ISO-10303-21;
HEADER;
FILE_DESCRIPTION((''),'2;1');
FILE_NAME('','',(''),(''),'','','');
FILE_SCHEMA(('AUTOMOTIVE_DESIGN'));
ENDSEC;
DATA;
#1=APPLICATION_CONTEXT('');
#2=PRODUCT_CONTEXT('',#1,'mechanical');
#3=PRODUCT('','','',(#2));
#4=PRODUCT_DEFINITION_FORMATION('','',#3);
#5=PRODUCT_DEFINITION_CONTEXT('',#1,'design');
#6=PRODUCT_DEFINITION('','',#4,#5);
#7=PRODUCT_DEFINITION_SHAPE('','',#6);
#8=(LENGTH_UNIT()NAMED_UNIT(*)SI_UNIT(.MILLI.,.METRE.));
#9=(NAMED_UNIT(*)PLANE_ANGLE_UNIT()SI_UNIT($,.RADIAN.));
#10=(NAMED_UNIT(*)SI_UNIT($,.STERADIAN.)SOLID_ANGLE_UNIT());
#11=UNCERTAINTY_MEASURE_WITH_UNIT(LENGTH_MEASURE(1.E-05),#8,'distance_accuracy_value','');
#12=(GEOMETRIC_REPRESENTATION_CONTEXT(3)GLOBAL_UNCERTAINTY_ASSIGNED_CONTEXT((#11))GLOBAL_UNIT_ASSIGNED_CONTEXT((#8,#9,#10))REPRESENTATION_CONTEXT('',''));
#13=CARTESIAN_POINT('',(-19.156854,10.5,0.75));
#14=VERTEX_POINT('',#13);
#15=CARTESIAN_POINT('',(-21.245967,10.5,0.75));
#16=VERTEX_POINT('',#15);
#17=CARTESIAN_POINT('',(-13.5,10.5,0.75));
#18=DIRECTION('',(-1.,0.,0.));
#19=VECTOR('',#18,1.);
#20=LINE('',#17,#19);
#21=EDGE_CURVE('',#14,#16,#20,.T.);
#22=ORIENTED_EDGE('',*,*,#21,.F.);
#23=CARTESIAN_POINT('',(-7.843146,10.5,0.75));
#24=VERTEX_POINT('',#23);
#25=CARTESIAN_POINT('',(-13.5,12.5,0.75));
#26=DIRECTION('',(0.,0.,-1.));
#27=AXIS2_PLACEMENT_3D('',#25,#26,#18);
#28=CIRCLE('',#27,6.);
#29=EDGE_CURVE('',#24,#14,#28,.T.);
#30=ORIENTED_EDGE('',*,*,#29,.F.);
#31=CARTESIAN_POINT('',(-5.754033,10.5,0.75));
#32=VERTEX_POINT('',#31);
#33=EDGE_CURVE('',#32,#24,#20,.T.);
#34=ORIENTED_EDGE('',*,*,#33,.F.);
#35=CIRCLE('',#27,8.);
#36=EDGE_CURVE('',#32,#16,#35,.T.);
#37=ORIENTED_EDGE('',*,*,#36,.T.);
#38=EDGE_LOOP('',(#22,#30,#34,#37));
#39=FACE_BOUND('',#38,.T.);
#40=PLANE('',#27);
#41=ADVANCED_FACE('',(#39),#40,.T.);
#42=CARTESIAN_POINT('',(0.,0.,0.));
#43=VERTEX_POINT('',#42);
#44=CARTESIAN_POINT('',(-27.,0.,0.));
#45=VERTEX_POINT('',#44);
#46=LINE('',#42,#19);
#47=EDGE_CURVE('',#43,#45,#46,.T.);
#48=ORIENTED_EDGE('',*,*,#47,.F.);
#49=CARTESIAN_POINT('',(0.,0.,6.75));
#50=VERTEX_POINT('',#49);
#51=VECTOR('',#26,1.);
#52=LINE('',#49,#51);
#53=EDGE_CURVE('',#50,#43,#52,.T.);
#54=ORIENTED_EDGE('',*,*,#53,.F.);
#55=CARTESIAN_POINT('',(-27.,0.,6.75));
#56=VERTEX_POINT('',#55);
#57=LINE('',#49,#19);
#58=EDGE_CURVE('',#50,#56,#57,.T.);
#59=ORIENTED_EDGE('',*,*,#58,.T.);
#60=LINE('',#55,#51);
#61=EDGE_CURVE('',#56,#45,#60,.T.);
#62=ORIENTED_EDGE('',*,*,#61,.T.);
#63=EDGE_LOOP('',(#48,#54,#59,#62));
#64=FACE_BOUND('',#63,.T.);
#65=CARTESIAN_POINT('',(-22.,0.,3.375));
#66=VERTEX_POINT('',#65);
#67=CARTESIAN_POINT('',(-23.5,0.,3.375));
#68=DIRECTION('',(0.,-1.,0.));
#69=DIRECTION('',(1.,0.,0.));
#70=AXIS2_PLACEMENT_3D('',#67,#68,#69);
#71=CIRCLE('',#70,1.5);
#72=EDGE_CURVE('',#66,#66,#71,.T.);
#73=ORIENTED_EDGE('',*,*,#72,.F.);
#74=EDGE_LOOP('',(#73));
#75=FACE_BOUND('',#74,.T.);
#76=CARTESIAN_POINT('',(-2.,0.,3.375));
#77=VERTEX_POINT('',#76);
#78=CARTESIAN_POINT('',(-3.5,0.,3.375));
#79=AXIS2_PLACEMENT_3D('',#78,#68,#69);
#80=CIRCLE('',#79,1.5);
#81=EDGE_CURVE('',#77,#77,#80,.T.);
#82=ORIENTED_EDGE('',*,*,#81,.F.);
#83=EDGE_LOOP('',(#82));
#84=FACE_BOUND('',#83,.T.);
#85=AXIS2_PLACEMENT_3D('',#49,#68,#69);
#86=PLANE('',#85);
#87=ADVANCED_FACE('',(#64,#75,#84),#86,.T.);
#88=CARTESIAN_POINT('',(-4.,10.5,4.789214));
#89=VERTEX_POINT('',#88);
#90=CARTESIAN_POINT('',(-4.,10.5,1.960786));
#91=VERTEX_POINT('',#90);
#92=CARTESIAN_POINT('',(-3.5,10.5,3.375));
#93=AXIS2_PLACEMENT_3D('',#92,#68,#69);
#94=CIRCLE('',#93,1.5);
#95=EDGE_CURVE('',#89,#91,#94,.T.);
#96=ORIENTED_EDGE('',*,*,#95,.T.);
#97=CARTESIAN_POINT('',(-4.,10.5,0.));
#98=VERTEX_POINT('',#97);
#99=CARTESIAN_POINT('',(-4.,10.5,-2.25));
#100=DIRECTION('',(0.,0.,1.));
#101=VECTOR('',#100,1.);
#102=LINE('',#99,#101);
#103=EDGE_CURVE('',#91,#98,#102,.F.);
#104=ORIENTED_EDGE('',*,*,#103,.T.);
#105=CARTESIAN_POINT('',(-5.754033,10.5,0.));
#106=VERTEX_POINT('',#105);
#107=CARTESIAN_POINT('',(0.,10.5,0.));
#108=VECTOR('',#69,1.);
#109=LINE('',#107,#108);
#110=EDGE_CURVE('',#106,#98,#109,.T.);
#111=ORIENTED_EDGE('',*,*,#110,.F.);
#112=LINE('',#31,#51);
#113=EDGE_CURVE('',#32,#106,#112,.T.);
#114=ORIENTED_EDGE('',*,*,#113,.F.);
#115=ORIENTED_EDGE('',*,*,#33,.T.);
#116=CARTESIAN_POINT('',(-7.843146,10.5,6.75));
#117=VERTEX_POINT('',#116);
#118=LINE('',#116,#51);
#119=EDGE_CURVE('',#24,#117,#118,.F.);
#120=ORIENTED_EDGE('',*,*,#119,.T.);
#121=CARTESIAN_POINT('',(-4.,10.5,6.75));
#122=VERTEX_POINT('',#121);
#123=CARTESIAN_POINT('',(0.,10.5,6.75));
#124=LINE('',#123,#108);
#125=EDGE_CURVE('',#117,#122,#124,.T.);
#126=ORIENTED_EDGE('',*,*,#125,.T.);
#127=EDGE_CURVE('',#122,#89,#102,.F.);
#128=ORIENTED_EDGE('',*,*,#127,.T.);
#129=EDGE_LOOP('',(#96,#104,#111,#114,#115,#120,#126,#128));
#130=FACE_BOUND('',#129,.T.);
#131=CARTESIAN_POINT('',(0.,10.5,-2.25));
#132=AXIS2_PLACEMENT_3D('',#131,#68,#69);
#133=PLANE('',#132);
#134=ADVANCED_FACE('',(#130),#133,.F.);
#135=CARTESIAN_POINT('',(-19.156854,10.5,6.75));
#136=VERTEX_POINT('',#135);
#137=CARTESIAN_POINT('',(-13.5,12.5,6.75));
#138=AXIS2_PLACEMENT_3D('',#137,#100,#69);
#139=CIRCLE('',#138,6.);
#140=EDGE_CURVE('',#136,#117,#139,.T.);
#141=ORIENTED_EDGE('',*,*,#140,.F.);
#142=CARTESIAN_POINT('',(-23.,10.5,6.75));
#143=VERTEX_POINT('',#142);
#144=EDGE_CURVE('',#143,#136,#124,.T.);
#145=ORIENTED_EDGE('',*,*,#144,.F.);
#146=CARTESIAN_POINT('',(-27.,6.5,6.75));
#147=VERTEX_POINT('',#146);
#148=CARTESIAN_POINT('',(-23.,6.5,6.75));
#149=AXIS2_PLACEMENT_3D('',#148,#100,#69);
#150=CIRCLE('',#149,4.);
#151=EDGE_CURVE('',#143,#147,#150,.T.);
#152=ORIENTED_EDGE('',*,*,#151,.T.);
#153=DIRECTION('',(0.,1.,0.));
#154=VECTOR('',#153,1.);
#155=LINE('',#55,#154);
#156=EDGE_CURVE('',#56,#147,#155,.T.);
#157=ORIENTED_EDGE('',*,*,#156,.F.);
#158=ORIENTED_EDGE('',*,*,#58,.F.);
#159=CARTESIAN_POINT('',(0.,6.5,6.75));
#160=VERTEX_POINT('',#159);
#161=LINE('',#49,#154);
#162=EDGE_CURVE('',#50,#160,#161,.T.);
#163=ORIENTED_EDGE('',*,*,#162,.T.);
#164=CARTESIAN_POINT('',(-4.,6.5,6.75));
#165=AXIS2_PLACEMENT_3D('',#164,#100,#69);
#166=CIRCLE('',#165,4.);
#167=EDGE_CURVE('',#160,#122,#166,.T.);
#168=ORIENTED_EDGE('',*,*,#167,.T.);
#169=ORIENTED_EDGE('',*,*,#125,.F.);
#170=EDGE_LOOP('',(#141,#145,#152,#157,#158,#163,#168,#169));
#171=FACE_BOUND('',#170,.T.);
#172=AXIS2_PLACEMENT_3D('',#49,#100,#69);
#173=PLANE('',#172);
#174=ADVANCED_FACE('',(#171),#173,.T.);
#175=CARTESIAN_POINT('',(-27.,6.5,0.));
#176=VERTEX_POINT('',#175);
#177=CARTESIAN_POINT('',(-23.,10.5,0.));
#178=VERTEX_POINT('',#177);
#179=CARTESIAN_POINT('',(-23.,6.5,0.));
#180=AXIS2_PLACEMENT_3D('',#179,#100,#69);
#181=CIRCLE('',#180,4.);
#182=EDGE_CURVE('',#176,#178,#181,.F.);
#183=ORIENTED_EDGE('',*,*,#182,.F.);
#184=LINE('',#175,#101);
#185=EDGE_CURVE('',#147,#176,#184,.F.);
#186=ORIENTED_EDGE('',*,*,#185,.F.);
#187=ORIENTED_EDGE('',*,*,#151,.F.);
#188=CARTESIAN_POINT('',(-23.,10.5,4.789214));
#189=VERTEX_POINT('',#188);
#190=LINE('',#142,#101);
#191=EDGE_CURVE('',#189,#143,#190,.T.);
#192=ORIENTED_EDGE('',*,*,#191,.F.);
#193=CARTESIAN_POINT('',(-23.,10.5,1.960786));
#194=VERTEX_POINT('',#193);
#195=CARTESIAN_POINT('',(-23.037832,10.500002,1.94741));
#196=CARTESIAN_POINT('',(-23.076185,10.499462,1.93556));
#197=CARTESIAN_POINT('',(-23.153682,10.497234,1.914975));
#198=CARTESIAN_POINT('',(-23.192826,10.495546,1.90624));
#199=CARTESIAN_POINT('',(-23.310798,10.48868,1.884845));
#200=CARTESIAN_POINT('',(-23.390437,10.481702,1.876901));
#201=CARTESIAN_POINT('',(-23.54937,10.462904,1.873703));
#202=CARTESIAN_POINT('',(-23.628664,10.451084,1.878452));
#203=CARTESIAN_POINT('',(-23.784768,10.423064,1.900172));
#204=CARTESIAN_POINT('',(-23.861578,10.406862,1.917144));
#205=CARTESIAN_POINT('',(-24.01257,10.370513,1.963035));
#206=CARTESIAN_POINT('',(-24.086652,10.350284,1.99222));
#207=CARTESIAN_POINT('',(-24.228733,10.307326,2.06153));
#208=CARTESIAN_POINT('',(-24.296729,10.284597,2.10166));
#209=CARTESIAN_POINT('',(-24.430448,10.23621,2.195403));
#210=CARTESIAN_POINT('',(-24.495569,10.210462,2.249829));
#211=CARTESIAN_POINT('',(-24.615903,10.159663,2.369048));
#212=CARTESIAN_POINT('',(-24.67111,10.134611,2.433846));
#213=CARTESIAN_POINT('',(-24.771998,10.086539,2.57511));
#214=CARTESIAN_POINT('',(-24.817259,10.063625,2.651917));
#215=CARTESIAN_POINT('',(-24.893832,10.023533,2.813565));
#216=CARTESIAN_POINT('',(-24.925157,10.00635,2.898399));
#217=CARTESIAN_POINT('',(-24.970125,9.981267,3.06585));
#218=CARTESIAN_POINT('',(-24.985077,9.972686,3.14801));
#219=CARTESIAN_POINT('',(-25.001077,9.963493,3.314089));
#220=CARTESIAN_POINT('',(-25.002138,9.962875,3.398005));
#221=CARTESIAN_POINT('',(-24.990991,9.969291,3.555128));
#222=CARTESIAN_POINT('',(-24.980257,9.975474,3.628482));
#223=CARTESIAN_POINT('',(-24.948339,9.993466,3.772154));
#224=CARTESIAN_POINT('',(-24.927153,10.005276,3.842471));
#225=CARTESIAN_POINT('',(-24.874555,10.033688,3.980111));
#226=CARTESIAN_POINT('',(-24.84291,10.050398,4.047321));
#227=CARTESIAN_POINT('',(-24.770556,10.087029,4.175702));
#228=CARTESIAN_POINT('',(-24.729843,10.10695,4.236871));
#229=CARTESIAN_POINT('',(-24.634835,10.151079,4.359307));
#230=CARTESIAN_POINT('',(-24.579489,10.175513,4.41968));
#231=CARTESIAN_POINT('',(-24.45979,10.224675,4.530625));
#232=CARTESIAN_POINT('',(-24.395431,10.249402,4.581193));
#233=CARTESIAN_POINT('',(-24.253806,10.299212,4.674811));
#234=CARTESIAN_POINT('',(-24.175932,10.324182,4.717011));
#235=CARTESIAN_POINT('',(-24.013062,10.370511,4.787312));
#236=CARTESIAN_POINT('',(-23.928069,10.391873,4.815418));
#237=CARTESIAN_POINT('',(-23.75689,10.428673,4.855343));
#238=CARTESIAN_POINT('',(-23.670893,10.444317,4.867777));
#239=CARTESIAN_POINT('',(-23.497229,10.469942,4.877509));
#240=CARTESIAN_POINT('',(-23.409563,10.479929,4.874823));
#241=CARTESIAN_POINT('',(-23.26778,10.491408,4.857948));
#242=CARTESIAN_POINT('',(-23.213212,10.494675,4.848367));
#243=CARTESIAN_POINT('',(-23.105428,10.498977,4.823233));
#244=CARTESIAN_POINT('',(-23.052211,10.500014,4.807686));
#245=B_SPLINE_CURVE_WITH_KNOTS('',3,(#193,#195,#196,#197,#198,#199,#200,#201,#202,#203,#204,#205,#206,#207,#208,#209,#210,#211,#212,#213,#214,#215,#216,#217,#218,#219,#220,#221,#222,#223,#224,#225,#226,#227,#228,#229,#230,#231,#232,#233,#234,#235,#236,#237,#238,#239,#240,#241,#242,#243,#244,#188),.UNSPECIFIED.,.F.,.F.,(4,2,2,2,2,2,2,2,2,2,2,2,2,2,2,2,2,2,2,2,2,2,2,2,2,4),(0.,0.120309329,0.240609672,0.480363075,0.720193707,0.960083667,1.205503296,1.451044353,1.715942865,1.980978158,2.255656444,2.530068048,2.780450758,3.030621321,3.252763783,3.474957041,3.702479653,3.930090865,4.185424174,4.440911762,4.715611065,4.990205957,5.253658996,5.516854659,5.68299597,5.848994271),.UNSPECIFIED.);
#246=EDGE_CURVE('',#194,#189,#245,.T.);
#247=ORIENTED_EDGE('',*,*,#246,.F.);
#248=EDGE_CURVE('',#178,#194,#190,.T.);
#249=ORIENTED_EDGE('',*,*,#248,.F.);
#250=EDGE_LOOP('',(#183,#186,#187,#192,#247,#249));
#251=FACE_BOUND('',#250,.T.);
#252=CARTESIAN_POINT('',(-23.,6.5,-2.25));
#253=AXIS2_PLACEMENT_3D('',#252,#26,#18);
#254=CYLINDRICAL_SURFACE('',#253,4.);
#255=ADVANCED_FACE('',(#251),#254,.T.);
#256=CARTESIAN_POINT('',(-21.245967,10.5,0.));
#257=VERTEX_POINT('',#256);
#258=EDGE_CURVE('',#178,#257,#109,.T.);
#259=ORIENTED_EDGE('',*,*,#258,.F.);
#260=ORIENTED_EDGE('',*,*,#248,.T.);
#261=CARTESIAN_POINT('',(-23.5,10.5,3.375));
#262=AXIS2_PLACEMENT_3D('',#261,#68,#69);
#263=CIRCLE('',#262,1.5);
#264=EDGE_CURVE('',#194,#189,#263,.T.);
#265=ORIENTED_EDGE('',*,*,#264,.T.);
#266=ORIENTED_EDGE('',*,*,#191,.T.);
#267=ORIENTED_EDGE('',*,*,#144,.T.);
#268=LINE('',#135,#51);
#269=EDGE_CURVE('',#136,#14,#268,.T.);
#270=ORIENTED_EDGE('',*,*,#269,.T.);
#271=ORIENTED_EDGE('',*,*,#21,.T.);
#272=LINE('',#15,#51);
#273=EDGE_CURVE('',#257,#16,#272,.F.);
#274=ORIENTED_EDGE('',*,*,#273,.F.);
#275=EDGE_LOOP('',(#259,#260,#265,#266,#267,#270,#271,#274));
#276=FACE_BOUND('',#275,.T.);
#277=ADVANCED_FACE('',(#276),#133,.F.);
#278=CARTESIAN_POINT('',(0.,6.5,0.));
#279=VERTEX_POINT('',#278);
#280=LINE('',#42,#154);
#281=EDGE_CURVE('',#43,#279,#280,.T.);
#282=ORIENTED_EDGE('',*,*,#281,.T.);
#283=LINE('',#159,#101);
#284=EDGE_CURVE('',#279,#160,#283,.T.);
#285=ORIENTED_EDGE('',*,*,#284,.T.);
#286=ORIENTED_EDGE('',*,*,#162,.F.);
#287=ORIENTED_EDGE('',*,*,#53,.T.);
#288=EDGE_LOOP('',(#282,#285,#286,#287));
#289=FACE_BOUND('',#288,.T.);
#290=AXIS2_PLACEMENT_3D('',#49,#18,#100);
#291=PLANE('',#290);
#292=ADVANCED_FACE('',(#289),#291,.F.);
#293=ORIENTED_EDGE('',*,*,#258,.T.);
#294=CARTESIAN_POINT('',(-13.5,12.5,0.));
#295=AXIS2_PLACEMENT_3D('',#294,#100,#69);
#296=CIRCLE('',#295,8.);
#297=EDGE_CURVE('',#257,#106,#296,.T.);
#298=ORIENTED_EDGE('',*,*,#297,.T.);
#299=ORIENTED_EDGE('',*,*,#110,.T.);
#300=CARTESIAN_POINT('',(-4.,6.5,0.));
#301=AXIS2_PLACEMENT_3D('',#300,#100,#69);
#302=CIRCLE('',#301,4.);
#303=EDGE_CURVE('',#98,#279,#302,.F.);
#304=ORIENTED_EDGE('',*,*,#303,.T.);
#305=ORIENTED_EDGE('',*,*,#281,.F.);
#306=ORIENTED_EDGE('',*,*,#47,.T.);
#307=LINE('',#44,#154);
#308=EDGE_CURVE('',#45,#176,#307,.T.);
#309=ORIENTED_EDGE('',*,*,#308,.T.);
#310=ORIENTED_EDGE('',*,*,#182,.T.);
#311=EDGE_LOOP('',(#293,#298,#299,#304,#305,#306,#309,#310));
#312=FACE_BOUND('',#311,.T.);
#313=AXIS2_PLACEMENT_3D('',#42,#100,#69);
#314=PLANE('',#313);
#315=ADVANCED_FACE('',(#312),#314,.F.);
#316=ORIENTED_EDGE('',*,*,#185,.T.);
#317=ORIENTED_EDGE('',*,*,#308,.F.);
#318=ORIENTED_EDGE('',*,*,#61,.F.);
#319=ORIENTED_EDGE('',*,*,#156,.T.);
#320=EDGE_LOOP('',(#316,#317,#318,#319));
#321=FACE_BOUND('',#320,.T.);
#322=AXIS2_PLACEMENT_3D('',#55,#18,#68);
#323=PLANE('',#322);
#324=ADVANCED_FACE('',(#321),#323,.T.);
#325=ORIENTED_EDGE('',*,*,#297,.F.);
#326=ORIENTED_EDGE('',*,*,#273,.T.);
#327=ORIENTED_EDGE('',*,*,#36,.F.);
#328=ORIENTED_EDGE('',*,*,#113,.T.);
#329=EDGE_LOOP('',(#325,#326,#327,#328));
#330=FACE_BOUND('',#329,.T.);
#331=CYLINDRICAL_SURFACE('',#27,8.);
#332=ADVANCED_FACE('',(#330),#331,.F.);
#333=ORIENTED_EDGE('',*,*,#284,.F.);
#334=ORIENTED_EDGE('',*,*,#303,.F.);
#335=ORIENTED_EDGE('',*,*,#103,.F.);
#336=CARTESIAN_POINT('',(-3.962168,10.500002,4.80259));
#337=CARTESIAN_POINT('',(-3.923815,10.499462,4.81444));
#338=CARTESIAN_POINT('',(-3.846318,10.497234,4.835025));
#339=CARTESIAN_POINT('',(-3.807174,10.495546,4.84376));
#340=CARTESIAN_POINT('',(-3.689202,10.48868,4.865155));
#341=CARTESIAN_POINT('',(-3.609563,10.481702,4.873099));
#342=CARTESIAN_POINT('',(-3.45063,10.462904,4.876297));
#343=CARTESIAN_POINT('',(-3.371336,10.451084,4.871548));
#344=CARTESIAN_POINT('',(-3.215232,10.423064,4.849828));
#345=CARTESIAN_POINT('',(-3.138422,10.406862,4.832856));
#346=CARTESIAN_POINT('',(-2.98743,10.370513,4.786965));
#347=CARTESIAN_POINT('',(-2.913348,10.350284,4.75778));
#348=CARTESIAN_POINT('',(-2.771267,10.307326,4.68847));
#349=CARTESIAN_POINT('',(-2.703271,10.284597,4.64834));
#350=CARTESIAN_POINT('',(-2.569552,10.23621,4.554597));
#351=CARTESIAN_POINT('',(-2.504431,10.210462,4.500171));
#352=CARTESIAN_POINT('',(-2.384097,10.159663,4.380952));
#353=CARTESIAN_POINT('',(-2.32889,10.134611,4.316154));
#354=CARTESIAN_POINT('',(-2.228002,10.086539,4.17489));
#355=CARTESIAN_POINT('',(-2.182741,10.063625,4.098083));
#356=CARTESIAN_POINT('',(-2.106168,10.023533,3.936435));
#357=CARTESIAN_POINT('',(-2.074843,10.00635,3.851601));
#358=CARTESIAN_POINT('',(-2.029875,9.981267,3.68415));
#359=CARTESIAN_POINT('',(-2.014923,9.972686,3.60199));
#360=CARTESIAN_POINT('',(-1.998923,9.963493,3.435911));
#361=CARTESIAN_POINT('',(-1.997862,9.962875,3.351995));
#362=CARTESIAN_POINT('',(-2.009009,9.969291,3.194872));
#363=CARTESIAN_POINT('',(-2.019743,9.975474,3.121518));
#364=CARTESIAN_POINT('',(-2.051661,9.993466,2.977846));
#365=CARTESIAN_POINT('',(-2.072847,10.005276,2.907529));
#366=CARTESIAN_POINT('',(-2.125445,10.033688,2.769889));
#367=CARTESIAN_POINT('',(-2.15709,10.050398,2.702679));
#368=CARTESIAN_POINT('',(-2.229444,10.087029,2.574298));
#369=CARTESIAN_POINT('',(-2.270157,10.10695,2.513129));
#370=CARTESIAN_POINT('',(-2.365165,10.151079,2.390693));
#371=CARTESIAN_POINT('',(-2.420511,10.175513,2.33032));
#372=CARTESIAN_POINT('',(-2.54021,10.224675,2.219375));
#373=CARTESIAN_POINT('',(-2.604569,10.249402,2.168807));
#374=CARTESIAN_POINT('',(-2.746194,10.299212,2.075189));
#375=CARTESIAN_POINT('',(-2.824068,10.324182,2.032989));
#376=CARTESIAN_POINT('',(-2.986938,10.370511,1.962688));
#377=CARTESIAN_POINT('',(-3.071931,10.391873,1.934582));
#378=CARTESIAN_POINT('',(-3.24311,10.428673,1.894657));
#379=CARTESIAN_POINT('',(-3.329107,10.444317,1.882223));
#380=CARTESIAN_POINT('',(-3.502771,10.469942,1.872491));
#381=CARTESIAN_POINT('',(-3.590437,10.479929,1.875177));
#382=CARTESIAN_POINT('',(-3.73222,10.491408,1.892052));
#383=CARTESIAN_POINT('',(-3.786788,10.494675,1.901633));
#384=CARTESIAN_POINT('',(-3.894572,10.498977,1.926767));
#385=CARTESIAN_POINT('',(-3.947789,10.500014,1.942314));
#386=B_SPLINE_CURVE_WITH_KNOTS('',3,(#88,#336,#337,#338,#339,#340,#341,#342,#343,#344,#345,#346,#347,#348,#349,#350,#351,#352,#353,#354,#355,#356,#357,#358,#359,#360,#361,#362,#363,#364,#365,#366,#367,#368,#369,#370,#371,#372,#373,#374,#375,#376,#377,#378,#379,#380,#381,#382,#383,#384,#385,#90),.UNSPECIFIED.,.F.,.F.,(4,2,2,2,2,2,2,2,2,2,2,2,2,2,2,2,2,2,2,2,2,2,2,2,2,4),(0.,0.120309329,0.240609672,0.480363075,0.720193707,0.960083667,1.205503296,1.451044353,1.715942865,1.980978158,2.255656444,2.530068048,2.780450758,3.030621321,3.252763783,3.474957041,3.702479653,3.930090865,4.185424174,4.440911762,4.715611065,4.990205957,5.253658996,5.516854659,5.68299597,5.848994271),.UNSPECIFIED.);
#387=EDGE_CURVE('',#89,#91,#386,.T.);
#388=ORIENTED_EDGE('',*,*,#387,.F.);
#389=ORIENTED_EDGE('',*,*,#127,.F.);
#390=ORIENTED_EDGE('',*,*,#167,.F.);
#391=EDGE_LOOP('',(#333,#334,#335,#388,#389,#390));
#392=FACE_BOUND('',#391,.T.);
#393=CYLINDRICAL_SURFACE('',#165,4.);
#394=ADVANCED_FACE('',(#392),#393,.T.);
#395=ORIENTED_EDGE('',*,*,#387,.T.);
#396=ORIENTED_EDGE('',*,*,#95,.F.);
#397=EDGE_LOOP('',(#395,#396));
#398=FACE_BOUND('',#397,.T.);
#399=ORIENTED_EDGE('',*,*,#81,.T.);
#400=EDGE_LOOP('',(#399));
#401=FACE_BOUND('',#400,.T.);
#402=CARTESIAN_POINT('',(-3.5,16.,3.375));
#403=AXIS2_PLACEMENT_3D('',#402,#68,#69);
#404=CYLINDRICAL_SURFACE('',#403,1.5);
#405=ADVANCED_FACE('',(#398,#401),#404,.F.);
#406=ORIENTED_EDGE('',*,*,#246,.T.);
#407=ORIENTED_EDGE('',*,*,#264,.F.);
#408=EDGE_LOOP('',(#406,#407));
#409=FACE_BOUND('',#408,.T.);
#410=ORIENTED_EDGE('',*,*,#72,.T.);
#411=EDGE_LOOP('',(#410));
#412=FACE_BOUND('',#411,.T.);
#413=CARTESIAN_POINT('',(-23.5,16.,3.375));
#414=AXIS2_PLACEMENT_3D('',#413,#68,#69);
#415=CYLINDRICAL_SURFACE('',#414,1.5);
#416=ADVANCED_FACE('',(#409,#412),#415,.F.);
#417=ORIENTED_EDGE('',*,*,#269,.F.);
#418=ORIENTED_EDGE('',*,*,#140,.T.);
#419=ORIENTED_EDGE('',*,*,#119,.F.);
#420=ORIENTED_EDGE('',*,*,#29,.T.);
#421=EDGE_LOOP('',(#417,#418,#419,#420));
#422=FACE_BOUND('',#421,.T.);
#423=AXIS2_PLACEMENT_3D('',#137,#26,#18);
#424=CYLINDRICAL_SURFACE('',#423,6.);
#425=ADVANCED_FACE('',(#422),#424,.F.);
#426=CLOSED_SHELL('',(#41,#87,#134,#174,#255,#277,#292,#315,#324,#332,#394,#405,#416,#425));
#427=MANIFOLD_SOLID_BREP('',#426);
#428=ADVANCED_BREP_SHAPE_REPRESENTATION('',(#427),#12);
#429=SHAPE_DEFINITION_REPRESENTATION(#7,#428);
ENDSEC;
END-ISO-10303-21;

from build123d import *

# Parameters (mm, degrees)
BOSS_EXTRUDE1_DEPTH = 6.75
SKETCH3_R           = 8
CUT_EXTRUDE2_DEPTH  = 0.75
SKETCH4_W           = 27
SKETCH4_H           = 2
CUT_EXTRUDE3_DEPTH  = 9
SKETCH5_R           = 1.5
CUT_EXTRUDE4_DEPTH  = 16
FILLET1_R           = 4


with BuildPart() as part:
    # Sketch1 → Boss-Extrude1 (new body)
    with BuildSketch(Plane.XY):
        with BuildLine():
            Line((-27, 0), (0, 0))
            Line((0, 0), (0, 12.5))
            Line((0, 12.5), (-7.5, 12.5))
            ThreePointArc((-7.5, 12.5), (-13.5, 6.5), (-19.5, 12.5))
            Line((-19.5, 12.5), (-27, 12.5))
            Line((-27, 12.5), (-27, 0))
        make_face()
    extrude(amount=BOSS_EXTRUDE1_DEPTH)

    # Sketch3 → Cut-Extrude2 (cut)
    with BuildSketch(Plane(origin=(0, 0, 0), x_dir=(-1, 0, 0), z_dir=(0, 0, -1))):
        with Locations((13.5, 12.5)):
            Circle(SKETCH3_R)
    extrude(amount=-CUT_EXTRUDE2_DEPTH, mode=Mode.SUBTRACT)

    # Sketch4 → Cut-Extrude3 (cut)
    with BuildSketch(Plane.XY.offset(6.75)):
        with Locations((-13.5, 11.5)):
            Rectangle(SKETCH4_W, SKETCH4_H)
    extrude(amount=-CUT_EXTRUDE3_DEPTH, mode=Mode.SUBTRACT)

    # Sketch5 → Cut-Extrude4 (cut)
    with BuildSketch(Plane.XZ):
        with Locations((-23.5, 3.375)):
            Circle(SKETCH5_R)
        with Locations((-3.5, 3.375)):
            Circle(SKETCH5_R)
    extrude(amount=-CUT_EXTRUDE4_DEPTH, mode=Mode.SUBTRACT)

    # Fillet1
    # the kernel refuses this fillet: 4 mm, written as the material it takes off along each edge
    with BuildSketch(Plane(origin=(-27, 10.5, 16.75), x_dir=(1, 0, 0), z_dir=(0, 0, -1))) as fillet1_piece_1:
        with BuildLine():
            CenterArc((FILLET1_R, FILLET1_R), FILLET1_R, 180, 90)
            Line((0, FILLET1_R), (0, 0))
            Line((0, 0), (FILLET1_R, 0))
        make_face()
    extrude(amount=26.75, mode=Mode.SUBTRACT)
    with BuildSketch(Plane(origin=(0, 10.5, 16.75), x_dir=(-1, 0, 0), z_dir=(0, 0, -1))) as fillet1_piece_2:
        with BuildLine():
            CenterArc((FILLET1_R, -FILLET1_R), FILLET1_R, 90, 90)
            Line((0, -FILLET1_R), (0, 0))
            Line((0, 0), (FILLET1_R, 0))
        make_face()
    extrude(amount=26.75, mode=Mode.SUBTRACT)


solid = part.part
